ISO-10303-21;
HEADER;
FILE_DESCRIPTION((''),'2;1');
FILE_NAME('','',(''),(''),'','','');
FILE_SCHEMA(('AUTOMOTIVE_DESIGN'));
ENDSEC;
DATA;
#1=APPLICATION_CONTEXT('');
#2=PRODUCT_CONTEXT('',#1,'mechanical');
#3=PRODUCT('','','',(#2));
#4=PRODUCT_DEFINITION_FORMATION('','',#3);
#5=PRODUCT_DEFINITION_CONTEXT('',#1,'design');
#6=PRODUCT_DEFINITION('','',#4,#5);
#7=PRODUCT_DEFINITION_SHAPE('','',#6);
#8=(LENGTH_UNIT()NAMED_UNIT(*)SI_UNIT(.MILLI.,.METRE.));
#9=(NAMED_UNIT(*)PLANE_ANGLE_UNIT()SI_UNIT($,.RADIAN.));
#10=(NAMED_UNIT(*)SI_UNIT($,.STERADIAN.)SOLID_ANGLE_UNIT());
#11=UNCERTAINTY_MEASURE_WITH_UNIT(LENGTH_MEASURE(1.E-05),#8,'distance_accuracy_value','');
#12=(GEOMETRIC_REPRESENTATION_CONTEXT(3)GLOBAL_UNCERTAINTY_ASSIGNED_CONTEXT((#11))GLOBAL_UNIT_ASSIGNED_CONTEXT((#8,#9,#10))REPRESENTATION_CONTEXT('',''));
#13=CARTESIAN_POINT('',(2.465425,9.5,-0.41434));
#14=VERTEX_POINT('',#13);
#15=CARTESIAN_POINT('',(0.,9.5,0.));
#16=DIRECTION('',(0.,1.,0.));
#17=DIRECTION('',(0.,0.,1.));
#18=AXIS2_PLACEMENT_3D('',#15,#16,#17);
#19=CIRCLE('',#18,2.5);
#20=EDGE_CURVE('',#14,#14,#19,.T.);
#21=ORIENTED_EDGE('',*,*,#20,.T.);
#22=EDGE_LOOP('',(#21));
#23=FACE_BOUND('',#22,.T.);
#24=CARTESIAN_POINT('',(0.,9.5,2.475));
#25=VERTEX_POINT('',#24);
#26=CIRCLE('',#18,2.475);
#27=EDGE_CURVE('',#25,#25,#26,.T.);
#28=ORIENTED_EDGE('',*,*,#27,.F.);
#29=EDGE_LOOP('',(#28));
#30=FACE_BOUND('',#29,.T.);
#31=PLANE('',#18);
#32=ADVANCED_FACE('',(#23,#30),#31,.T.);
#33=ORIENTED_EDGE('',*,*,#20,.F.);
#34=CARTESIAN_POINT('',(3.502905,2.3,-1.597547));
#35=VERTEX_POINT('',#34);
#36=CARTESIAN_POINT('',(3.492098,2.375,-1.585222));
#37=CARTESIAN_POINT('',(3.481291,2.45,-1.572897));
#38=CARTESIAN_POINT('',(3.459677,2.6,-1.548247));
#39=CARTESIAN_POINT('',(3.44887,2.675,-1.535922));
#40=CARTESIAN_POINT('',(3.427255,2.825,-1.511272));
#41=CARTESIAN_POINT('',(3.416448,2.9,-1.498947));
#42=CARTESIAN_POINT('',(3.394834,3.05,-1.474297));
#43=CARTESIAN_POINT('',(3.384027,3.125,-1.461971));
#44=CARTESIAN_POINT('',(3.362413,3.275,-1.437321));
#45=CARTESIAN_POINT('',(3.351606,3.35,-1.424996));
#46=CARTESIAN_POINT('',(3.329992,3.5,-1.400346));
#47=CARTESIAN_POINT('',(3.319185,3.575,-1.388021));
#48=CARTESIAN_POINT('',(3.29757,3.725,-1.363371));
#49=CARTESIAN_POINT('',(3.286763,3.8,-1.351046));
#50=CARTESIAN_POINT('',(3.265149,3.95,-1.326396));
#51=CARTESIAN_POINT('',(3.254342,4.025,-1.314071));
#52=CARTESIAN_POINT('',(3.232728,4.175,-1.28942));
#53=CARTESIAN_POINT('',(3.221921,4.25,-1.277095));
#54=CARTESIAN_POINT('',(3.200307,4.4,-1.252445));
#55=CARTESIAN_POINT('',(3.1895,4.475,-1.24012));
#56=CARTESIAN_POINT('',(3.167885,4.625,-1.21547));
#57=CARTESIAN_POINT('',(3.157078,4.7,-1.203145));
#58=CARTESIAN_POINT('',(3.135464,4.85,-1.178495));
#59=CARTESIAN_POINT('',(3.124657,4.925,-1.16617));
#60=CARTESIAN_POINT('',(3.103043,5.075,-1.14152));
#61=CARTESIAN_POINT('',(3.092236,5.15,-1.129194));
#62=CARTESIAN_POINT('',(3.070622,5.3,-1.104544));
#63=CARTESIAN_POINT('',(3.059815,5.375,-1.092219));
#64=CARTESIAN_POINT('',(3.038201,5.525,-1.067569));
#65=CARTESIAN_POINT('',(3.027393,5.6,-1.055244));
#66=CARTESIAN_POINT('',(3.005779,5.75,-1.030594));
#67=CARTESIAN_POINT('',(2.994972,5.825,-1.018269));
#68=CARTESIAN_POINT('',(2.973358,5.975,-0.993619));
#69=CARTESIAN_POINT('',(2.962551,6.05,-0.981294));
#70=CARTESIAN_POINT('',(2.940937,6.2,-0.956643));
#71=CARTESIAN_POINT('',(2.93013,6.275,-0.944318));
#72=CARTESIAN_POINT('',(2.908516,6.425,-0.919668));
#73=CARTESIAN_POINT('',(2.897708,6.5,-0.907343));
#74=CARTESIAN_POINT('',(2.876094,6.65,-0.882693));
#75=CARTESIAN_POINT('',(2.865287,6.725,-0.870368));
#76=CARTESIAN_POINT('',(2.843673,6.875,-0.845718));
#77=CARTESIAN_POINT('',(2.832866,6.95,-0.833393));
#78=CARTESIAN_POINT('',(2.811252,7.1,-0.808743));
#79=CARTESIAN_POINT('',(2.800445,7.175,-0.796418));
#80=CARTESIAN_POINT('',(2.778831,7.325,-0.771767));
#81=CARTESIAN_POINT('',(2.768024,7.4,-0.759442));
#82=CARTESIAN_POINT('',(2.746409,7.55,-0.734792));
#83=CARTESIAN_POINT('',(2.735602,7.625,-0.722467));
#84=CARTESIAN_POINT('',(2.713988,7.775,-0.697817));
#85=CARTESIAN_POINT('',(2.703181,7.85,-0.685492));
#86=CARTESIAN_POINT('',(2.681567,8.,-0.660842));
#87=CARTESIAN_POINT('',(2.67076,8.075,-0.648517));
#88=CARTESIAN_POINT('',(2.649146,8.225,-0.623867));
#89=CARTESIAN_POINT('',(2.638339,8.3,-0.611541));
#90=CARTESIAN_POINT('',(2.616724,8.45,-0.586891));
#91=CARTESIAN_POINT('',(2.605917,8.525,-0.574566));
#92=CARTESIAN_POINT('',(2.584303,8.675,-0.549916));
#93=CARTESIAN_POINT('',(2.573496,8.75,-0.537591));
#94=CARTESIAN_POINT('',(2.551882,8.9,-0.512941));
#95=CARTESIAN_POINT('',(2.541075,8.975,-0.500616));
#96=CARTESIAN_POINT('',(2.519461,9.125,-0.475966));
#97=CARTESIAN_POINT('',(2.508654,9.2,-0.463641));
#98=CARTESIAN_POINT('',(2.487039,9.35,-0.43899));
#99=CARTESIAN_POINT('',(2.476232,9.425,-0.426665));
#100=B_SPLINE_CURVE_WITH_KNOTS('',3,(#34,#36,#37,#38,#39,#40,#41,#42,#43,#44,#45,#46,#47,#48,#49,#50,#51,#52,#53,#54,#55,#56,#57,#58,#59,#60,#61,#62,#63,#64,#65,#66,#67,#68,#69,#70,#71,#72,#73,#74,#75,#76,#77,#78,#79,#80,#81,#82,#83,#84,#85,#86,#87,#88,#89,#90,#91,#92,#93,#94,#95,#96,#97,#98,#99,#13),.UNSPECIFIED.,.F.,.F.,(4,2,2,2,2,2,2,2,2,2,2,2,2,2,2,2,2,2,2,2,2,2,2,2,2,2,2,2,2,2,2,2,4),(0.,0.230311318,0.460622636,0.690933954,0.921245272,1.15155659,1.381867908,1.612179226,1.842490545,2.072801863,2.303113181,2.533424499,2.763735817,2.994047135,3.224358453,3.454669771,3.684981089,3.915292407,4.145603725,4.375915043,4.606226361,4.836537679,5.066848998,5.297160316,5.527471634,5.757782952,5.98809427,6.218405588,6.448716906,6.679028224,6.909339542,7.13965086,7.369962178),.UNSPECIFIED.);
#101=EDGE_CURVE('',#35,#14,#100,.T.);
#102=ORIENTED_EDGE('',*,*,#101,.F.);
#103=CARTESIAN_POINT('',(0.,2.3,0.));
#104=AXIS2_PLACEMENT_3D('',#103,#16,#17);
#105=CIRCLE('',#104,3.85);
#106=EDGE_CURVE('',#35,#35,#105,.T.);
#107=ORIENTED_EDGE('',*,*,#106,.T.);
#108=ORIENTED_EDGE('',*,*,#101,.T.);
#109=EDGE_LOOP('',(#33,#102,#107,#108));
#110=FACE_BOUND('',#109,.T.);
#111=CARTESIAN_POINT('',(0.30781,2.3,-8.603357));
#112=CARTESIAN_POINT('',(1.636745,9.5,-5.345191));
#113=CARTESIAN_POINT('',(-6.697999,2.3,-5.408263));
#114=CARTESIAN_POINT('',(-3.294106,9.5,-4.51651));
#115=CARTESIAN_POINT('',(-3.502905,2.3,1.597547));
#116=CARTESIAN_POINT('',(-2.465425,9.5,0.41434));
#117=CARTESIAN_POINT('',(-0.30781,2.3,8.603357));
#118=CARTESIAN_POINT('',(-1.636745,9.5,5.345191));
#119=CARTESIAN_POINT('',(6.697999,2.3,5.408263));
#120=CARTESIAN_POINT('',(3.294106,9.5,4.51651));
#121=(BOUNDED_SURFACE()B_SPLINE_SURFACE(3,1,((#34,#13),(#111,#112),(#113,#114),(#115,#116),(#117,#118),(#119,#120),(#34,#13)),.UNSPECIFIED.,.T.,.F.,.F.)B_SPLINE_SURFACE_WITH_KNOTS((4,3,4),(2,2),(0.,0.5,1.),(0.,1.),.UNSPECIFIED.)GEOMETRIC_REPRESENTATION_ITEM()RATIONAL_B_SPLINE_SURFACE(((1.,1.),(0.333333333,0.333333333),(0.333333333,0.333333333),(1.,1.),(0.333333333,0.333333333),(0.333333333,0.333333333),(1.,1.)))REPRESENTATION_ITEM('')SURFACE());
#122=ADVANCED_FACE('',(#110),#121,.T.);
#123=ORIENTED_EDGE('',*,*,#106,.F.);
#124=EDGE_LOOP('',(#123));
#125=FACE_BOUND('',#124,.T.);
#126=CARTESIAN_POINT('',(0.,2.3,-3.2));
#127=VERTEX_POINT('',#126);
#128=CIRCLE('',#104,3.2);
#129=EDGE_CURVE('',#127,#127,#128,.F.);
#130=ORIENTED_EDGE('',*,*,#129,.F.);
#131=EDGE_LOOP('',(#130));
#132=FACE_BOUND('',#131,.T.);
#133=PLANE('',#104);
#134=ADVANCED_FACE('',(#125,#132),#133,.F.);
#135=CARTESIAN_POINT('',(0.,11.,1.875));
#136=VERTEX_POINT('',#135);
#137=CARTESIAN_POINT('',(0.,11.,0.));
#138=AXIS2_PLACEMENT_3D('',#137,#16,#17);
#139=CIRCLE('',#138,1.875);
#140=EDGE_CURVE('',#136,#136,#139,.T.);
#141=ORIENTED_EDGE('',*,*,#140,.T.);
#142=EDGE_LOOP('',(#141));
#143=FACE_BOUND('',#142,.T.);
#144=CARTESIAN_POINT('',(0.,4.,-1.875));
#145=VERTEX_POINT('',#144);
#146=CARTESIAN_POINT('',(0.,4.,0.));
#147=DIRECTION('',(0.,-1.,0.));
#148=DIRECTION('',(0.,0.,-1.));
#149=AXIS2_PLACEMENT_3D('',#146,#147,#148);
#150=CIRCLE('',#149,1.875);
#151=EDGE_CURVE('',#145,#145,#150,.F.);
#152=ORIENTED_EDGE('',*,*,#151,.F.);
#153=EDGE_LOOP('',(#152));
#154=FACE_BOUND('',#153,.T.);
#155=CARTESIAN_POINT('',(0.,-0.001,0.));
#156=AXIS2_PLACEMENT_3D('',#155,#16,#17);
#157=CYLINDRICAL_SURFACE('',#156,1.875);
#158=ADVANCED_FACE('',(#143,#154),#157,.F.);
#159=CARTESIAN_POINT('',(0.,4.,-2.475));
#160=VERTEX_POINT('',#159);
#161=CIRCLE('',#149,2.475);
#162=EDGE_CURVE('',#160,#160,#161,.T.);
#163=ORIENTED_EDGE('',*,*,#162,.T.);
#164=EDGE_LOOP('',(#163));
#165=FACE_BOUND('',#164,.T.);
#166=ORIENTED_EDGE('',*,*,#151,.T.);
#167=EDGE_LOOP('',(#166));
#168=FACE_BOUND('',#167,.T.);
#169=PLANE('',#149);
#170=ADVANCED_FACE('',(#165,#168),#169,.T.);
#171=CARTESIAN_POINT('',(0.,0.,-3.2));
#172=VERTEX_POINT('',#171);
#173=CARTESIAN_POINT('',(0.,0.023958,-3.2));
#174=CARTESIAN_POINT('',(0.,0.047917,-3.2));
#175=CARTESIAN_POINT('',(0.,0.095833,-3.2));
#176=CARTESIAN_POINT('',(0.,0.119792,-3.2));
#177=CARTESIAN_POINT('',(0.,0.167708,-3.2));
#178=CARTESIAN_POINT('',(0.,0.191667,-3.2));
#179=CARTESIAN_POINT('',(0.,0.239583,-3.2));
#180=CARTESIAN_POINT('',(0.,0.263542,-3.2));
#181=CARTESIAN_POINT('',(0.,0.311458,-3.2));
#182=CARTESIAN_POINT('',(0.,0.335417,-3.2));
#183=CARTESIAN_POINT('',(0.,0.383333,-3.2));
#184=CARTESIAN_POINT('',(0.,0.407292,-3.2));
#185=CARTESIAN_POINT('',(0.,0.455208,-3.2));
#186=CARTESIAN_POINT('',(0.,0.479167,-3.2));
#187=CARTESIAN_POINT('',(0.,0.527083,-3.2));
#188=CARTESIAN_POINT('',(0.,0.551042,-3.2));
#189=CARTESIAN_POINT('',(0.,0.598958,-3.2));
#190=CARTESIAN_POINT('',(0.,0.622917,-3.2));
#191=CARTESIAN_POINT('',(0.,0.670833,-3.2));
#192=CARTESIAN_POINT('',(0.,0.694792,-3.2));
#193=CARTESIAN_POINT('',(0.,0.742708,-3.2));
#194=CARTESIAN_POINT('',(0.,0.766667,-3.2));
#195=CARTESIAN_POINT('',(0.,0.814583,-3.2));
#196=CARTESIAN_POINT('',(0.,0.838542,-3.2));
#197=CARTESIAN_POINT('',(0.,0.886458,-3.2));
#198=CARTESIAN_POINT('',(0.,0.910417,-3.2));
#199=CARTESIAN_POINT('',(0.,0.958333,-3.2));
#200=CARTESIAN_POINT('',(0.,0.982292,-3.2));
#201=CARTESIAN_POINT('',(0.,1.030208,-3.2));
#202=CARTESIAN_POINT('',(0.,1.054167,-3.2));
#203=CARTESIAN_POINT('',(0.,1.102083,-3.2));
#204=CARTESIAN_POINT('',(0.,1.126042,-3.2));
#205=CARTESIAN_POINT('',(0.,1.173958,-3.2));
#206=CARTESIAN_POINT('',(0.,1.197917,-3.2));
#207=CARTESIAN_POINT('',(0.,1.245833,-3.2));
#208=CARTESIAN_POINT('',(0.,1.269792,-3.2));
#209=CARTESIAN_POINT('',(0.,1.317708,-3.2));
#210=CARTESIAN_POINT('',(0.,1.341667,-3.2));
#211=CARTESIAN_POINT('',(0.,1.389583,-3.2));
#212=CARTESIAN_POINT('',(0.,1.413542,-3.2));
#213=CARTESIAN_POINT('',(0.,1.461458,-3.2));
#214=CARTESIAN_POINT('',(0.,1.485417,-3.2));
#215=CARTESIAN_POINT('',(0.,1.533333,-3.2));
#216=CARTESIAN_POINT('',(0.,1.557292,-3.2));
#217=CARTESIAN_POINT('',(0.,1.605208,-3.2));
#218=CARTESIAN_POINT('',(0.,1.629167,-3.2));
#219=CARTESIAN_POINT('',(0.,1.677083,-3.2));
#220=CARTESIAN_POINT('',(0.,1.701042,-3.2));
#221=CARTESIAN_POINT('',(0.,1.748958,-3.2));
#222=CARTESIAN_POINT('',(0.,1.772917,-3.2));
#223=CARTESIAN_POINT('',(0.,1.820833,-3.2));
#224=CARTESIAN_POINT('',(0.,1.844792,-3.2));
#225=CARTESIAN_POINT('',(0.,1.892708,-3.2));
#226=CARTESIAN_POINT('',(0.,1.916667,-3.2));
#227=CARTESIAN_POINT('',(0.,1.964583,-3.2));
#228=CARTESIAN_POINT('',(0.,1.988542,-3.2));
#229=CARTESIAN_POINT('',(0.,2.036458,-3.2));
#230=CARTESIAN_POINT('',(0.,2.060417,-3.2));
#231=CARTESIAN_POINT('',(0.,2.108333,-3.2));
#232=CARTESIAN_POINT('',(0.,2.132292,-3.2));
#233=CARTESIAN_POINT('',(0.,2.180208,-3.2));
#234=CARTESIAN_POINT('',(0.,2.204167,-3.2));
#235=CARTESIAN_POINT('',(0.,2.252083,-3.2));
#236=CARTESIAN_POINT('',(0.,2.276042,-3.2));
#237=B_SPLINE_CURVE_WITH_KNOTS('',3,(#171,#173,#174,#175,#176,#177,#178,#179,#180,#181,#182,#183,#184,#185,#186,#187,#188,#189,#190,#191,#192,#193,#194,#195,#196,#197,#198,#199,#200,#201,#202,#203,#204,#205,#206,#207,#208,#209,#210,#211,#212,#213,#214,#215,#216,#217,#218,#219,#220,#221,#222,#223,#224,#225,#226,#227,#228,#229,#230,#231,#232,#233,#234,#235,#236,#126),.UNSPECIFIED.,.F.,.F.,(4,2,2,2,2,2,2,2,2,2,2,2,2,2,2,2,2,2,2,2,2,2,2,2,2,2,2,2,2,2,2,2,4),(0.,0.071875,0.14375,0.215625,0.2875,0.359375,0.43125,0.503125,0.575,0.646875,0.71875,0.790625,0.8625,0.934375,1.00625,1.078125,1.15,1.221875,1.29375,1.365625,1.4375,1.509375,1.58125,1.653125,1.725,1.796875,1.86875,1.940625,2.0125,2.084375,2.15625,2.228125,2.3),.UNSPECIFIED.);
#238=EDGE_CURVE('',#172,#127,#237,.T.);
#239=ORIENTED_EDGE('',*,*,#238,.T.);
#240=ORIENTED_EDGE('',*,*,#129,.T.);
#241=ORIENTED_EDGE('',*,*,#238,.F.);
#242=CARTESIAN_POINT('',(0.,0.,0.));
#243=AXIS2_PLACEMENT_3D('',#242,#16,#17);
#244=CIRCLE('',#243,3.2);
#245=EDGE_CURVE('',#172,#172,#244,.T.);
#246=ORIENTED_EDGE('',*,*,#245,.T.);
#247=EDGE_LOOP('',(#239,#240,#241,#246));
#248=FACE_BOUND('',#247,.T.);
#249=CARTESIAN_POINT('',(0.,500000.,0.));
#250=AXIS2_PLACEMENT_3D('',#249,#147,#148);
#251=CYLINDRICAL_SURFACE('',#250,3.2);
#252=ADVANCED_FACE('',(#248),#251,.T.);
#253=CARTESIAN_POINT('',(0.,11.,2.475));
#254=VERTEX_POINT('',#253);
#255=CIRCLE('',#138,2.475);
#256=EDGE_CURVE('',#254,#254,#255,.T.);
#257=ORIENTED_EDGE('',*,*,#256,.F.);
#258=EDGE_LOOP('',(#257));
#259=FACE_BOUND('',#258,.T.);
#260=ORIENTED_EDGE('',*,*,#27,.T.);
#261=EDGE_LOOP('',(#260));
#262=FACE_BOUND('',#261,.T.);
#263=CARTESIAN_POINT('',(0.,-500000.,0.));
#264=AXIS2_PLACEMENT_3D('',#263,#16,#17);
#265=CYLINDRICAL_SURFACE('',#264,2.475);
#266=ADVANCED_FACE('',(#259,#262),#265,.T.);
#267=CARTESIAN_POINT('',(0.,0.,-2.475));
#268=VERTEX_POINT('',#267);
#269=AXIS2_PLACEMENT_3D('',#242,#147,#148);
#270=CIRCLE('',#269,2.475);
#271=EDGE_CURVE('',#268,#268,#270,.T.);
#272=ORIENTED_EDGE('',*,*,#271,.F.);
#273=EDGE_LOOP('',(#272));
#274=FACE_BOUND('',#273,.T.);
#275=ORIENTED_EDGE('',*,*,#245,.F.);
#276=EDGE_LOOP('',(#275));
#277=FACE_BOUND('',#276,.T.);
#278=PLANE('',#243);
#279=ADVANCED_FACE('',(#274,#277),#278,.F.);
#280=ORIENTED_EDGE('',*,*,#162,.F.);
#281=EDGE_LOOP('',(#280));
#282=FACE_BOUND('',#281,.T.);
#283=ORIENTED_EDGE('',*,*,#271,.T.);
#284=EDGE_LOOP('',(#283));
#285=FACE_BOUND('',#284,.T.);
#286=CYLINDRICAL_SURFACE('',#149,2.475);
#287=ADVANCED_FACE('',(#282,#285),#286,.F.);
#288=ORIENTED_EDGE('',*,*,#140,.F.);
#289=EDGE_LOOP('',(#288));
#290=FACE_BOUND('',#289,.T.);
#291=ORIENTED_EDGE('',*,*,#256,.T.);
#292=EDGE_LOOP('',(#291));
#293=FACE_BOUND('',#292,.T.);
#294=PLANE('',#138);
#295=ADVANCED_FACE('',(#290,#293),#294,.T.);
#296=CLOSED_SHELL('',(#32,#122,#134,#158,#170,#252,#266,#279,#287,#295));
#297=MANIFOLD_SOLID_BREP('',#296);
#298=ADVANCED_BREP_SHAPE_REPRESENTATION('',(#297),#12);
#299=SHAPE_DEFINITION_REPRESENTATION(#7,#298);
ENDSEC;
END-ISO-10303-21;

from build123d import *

# Parameters (mm, degrees)
BOSS_EXTRUDE1_REACH = 12.263
SKETCH4_R           = 2.475
BOSS_EXTRUDE2_REACH = 14.274
SKETCH1_R           = 3.2
CUT_EXTRUDE1_START  = -4
SKETCH5_R           = 2.475
CUT_EXTRUDE1_DEPTH  = 4
CUT_EXTRUDE2_REACH  = 14.274
SKETCH6_R           = 1.875


with BuildPart() as part:
    # Loft4: read off the stored shape, not the designer's step
    # Loft4: loft between two sections, ruled curve by curve
    loft4_from = [
        Edge.make_bspline([(3.50290491, 2.3, -1.597547242), (0.307810426, 2.3, -8.603357062), (-6.697999394, 2.3, -5.408262578), (-3.50290491, 2.3, 1.597547242), (-0.307810426, 2.3, 8.603357062), (6.697999394, 2.3, 5.408262578), (3.50290491, 2.3, -1.597547242)], [0, 0, 0, 0, 0.5, 0.5, 0.5, 1, 1, 1, 1], 3, [1, 0.333333333, 0.333333333, 1, 0.333333333, 0.333333333, 1]),
    ]
    loft4_to = [
        Edge.make_bspline([(2.465425341, 9.5, -0.414340307), (1.636744726, 9.5, -5.345190988), (-3.294105955, 9.5, -4.516510374), (-2.465425341, 9.5, 0.414340307), (-1.636744726, 9.5, 5.345190988), (3.294105955, 9.5, 4.516510374), (2.465425341, 9.5, -0.414340307)], [0, 0, 0, 0, 0.5, 0.5, 0.5, 1, 1, 1, 1], 3, [1, 0.333333333, 0.333333333, 1, 0.333333333, 0.333333333, 1]),
    ]
    loft4 = Solid(Shell([*[Face.make_surface_from_curves(loft4_from[k], loft4_to[k]) for k in range(1)], Face(Wire(loft4_from)), Face(Wire(loft4_to))]))
    add(loft4)

    # Sketch4 → Boss-Extrude1 (add, up to next)
    with BuildSketch(Plane(origin=(0, 11, 0), x_dir=(-1, 0, 0), z_dir=(0, 1, 0)), mode=Mode.PRIVATE) as boss_extrude1_sk1:
        with Locations(Location((0, 0, 0), (0, 0, 90))):
            Circle(SKETCH4_R)
    boss_extrude1_tool1 = extrude(boss_extrude1_sk1.sketch, amount=-BOSS_EXTRUDE1_REACH, mode=Mode.PRIVATE) - part.part
    add(boss_extrude1_tool1.solids().sort_by_distance((0, 11, 0))[0])

    # Sketch1 → Boss-Extrude2 (add, up to next)
    with BuildSketch(Plane(origin=(0, 0, 0), x_dir=(1, 0, 0), z_dir=(0, 1, 0)), mode=Mode.PRIVATE) as boss_extrude2_sk1:
        with Locations(Location((0, 0, 0), (0, 0, 90))):
            Circle(SKETCH1_R)
    boss_extrude2_tool1 = extrude(boss_extrude2_sk1.sketch, amount=BOSS_EXTRUDE2_REACH, mode=Mode.PRIVATE) - part.part
    add(boss_extrude2_tool1.solids().sort_by_distance((0, 0, 0))[0])

    # Sketch5 → Cut-Extrude1 (cut)
    with BuildSketch(Plane.XZ.offset(CUT_EXTRUDE1_START)):
        with Locations(Location((0, 0, 0), (0, 0, 90))):
            Circle(SKETCH5_R)
    extrude(amount=CUT_EXTRUDE1_DEPTH, mode=Mode.SUBTRACT)

    # Sketch6 → Cut-Extrude2 (cut, up to next)
    with BuildSketch(Plane(origin=(0, 11, 0), x_dir=(1, 0, 0), z_dir=(0, 1, 0)), mode=Mode.PRIVATE) as cut_extrude2_sk1:
        with Locations(Location((0, 0, 0), (0, 0, 270))):
            Circle(SKETCH6_R)
    cut_extrude2_tool1 = extrude(cut_extrude2_sk1.sketch, amount=-CUT_EXTRUDE2_REACH, mode=Mode.PRIVATE) & part.part
    add(cut_extrude2_tool1.solids().sort_by_distance((0, 11, 0))[0], mode=Mode.SUBTRACT)


solid = part.part
